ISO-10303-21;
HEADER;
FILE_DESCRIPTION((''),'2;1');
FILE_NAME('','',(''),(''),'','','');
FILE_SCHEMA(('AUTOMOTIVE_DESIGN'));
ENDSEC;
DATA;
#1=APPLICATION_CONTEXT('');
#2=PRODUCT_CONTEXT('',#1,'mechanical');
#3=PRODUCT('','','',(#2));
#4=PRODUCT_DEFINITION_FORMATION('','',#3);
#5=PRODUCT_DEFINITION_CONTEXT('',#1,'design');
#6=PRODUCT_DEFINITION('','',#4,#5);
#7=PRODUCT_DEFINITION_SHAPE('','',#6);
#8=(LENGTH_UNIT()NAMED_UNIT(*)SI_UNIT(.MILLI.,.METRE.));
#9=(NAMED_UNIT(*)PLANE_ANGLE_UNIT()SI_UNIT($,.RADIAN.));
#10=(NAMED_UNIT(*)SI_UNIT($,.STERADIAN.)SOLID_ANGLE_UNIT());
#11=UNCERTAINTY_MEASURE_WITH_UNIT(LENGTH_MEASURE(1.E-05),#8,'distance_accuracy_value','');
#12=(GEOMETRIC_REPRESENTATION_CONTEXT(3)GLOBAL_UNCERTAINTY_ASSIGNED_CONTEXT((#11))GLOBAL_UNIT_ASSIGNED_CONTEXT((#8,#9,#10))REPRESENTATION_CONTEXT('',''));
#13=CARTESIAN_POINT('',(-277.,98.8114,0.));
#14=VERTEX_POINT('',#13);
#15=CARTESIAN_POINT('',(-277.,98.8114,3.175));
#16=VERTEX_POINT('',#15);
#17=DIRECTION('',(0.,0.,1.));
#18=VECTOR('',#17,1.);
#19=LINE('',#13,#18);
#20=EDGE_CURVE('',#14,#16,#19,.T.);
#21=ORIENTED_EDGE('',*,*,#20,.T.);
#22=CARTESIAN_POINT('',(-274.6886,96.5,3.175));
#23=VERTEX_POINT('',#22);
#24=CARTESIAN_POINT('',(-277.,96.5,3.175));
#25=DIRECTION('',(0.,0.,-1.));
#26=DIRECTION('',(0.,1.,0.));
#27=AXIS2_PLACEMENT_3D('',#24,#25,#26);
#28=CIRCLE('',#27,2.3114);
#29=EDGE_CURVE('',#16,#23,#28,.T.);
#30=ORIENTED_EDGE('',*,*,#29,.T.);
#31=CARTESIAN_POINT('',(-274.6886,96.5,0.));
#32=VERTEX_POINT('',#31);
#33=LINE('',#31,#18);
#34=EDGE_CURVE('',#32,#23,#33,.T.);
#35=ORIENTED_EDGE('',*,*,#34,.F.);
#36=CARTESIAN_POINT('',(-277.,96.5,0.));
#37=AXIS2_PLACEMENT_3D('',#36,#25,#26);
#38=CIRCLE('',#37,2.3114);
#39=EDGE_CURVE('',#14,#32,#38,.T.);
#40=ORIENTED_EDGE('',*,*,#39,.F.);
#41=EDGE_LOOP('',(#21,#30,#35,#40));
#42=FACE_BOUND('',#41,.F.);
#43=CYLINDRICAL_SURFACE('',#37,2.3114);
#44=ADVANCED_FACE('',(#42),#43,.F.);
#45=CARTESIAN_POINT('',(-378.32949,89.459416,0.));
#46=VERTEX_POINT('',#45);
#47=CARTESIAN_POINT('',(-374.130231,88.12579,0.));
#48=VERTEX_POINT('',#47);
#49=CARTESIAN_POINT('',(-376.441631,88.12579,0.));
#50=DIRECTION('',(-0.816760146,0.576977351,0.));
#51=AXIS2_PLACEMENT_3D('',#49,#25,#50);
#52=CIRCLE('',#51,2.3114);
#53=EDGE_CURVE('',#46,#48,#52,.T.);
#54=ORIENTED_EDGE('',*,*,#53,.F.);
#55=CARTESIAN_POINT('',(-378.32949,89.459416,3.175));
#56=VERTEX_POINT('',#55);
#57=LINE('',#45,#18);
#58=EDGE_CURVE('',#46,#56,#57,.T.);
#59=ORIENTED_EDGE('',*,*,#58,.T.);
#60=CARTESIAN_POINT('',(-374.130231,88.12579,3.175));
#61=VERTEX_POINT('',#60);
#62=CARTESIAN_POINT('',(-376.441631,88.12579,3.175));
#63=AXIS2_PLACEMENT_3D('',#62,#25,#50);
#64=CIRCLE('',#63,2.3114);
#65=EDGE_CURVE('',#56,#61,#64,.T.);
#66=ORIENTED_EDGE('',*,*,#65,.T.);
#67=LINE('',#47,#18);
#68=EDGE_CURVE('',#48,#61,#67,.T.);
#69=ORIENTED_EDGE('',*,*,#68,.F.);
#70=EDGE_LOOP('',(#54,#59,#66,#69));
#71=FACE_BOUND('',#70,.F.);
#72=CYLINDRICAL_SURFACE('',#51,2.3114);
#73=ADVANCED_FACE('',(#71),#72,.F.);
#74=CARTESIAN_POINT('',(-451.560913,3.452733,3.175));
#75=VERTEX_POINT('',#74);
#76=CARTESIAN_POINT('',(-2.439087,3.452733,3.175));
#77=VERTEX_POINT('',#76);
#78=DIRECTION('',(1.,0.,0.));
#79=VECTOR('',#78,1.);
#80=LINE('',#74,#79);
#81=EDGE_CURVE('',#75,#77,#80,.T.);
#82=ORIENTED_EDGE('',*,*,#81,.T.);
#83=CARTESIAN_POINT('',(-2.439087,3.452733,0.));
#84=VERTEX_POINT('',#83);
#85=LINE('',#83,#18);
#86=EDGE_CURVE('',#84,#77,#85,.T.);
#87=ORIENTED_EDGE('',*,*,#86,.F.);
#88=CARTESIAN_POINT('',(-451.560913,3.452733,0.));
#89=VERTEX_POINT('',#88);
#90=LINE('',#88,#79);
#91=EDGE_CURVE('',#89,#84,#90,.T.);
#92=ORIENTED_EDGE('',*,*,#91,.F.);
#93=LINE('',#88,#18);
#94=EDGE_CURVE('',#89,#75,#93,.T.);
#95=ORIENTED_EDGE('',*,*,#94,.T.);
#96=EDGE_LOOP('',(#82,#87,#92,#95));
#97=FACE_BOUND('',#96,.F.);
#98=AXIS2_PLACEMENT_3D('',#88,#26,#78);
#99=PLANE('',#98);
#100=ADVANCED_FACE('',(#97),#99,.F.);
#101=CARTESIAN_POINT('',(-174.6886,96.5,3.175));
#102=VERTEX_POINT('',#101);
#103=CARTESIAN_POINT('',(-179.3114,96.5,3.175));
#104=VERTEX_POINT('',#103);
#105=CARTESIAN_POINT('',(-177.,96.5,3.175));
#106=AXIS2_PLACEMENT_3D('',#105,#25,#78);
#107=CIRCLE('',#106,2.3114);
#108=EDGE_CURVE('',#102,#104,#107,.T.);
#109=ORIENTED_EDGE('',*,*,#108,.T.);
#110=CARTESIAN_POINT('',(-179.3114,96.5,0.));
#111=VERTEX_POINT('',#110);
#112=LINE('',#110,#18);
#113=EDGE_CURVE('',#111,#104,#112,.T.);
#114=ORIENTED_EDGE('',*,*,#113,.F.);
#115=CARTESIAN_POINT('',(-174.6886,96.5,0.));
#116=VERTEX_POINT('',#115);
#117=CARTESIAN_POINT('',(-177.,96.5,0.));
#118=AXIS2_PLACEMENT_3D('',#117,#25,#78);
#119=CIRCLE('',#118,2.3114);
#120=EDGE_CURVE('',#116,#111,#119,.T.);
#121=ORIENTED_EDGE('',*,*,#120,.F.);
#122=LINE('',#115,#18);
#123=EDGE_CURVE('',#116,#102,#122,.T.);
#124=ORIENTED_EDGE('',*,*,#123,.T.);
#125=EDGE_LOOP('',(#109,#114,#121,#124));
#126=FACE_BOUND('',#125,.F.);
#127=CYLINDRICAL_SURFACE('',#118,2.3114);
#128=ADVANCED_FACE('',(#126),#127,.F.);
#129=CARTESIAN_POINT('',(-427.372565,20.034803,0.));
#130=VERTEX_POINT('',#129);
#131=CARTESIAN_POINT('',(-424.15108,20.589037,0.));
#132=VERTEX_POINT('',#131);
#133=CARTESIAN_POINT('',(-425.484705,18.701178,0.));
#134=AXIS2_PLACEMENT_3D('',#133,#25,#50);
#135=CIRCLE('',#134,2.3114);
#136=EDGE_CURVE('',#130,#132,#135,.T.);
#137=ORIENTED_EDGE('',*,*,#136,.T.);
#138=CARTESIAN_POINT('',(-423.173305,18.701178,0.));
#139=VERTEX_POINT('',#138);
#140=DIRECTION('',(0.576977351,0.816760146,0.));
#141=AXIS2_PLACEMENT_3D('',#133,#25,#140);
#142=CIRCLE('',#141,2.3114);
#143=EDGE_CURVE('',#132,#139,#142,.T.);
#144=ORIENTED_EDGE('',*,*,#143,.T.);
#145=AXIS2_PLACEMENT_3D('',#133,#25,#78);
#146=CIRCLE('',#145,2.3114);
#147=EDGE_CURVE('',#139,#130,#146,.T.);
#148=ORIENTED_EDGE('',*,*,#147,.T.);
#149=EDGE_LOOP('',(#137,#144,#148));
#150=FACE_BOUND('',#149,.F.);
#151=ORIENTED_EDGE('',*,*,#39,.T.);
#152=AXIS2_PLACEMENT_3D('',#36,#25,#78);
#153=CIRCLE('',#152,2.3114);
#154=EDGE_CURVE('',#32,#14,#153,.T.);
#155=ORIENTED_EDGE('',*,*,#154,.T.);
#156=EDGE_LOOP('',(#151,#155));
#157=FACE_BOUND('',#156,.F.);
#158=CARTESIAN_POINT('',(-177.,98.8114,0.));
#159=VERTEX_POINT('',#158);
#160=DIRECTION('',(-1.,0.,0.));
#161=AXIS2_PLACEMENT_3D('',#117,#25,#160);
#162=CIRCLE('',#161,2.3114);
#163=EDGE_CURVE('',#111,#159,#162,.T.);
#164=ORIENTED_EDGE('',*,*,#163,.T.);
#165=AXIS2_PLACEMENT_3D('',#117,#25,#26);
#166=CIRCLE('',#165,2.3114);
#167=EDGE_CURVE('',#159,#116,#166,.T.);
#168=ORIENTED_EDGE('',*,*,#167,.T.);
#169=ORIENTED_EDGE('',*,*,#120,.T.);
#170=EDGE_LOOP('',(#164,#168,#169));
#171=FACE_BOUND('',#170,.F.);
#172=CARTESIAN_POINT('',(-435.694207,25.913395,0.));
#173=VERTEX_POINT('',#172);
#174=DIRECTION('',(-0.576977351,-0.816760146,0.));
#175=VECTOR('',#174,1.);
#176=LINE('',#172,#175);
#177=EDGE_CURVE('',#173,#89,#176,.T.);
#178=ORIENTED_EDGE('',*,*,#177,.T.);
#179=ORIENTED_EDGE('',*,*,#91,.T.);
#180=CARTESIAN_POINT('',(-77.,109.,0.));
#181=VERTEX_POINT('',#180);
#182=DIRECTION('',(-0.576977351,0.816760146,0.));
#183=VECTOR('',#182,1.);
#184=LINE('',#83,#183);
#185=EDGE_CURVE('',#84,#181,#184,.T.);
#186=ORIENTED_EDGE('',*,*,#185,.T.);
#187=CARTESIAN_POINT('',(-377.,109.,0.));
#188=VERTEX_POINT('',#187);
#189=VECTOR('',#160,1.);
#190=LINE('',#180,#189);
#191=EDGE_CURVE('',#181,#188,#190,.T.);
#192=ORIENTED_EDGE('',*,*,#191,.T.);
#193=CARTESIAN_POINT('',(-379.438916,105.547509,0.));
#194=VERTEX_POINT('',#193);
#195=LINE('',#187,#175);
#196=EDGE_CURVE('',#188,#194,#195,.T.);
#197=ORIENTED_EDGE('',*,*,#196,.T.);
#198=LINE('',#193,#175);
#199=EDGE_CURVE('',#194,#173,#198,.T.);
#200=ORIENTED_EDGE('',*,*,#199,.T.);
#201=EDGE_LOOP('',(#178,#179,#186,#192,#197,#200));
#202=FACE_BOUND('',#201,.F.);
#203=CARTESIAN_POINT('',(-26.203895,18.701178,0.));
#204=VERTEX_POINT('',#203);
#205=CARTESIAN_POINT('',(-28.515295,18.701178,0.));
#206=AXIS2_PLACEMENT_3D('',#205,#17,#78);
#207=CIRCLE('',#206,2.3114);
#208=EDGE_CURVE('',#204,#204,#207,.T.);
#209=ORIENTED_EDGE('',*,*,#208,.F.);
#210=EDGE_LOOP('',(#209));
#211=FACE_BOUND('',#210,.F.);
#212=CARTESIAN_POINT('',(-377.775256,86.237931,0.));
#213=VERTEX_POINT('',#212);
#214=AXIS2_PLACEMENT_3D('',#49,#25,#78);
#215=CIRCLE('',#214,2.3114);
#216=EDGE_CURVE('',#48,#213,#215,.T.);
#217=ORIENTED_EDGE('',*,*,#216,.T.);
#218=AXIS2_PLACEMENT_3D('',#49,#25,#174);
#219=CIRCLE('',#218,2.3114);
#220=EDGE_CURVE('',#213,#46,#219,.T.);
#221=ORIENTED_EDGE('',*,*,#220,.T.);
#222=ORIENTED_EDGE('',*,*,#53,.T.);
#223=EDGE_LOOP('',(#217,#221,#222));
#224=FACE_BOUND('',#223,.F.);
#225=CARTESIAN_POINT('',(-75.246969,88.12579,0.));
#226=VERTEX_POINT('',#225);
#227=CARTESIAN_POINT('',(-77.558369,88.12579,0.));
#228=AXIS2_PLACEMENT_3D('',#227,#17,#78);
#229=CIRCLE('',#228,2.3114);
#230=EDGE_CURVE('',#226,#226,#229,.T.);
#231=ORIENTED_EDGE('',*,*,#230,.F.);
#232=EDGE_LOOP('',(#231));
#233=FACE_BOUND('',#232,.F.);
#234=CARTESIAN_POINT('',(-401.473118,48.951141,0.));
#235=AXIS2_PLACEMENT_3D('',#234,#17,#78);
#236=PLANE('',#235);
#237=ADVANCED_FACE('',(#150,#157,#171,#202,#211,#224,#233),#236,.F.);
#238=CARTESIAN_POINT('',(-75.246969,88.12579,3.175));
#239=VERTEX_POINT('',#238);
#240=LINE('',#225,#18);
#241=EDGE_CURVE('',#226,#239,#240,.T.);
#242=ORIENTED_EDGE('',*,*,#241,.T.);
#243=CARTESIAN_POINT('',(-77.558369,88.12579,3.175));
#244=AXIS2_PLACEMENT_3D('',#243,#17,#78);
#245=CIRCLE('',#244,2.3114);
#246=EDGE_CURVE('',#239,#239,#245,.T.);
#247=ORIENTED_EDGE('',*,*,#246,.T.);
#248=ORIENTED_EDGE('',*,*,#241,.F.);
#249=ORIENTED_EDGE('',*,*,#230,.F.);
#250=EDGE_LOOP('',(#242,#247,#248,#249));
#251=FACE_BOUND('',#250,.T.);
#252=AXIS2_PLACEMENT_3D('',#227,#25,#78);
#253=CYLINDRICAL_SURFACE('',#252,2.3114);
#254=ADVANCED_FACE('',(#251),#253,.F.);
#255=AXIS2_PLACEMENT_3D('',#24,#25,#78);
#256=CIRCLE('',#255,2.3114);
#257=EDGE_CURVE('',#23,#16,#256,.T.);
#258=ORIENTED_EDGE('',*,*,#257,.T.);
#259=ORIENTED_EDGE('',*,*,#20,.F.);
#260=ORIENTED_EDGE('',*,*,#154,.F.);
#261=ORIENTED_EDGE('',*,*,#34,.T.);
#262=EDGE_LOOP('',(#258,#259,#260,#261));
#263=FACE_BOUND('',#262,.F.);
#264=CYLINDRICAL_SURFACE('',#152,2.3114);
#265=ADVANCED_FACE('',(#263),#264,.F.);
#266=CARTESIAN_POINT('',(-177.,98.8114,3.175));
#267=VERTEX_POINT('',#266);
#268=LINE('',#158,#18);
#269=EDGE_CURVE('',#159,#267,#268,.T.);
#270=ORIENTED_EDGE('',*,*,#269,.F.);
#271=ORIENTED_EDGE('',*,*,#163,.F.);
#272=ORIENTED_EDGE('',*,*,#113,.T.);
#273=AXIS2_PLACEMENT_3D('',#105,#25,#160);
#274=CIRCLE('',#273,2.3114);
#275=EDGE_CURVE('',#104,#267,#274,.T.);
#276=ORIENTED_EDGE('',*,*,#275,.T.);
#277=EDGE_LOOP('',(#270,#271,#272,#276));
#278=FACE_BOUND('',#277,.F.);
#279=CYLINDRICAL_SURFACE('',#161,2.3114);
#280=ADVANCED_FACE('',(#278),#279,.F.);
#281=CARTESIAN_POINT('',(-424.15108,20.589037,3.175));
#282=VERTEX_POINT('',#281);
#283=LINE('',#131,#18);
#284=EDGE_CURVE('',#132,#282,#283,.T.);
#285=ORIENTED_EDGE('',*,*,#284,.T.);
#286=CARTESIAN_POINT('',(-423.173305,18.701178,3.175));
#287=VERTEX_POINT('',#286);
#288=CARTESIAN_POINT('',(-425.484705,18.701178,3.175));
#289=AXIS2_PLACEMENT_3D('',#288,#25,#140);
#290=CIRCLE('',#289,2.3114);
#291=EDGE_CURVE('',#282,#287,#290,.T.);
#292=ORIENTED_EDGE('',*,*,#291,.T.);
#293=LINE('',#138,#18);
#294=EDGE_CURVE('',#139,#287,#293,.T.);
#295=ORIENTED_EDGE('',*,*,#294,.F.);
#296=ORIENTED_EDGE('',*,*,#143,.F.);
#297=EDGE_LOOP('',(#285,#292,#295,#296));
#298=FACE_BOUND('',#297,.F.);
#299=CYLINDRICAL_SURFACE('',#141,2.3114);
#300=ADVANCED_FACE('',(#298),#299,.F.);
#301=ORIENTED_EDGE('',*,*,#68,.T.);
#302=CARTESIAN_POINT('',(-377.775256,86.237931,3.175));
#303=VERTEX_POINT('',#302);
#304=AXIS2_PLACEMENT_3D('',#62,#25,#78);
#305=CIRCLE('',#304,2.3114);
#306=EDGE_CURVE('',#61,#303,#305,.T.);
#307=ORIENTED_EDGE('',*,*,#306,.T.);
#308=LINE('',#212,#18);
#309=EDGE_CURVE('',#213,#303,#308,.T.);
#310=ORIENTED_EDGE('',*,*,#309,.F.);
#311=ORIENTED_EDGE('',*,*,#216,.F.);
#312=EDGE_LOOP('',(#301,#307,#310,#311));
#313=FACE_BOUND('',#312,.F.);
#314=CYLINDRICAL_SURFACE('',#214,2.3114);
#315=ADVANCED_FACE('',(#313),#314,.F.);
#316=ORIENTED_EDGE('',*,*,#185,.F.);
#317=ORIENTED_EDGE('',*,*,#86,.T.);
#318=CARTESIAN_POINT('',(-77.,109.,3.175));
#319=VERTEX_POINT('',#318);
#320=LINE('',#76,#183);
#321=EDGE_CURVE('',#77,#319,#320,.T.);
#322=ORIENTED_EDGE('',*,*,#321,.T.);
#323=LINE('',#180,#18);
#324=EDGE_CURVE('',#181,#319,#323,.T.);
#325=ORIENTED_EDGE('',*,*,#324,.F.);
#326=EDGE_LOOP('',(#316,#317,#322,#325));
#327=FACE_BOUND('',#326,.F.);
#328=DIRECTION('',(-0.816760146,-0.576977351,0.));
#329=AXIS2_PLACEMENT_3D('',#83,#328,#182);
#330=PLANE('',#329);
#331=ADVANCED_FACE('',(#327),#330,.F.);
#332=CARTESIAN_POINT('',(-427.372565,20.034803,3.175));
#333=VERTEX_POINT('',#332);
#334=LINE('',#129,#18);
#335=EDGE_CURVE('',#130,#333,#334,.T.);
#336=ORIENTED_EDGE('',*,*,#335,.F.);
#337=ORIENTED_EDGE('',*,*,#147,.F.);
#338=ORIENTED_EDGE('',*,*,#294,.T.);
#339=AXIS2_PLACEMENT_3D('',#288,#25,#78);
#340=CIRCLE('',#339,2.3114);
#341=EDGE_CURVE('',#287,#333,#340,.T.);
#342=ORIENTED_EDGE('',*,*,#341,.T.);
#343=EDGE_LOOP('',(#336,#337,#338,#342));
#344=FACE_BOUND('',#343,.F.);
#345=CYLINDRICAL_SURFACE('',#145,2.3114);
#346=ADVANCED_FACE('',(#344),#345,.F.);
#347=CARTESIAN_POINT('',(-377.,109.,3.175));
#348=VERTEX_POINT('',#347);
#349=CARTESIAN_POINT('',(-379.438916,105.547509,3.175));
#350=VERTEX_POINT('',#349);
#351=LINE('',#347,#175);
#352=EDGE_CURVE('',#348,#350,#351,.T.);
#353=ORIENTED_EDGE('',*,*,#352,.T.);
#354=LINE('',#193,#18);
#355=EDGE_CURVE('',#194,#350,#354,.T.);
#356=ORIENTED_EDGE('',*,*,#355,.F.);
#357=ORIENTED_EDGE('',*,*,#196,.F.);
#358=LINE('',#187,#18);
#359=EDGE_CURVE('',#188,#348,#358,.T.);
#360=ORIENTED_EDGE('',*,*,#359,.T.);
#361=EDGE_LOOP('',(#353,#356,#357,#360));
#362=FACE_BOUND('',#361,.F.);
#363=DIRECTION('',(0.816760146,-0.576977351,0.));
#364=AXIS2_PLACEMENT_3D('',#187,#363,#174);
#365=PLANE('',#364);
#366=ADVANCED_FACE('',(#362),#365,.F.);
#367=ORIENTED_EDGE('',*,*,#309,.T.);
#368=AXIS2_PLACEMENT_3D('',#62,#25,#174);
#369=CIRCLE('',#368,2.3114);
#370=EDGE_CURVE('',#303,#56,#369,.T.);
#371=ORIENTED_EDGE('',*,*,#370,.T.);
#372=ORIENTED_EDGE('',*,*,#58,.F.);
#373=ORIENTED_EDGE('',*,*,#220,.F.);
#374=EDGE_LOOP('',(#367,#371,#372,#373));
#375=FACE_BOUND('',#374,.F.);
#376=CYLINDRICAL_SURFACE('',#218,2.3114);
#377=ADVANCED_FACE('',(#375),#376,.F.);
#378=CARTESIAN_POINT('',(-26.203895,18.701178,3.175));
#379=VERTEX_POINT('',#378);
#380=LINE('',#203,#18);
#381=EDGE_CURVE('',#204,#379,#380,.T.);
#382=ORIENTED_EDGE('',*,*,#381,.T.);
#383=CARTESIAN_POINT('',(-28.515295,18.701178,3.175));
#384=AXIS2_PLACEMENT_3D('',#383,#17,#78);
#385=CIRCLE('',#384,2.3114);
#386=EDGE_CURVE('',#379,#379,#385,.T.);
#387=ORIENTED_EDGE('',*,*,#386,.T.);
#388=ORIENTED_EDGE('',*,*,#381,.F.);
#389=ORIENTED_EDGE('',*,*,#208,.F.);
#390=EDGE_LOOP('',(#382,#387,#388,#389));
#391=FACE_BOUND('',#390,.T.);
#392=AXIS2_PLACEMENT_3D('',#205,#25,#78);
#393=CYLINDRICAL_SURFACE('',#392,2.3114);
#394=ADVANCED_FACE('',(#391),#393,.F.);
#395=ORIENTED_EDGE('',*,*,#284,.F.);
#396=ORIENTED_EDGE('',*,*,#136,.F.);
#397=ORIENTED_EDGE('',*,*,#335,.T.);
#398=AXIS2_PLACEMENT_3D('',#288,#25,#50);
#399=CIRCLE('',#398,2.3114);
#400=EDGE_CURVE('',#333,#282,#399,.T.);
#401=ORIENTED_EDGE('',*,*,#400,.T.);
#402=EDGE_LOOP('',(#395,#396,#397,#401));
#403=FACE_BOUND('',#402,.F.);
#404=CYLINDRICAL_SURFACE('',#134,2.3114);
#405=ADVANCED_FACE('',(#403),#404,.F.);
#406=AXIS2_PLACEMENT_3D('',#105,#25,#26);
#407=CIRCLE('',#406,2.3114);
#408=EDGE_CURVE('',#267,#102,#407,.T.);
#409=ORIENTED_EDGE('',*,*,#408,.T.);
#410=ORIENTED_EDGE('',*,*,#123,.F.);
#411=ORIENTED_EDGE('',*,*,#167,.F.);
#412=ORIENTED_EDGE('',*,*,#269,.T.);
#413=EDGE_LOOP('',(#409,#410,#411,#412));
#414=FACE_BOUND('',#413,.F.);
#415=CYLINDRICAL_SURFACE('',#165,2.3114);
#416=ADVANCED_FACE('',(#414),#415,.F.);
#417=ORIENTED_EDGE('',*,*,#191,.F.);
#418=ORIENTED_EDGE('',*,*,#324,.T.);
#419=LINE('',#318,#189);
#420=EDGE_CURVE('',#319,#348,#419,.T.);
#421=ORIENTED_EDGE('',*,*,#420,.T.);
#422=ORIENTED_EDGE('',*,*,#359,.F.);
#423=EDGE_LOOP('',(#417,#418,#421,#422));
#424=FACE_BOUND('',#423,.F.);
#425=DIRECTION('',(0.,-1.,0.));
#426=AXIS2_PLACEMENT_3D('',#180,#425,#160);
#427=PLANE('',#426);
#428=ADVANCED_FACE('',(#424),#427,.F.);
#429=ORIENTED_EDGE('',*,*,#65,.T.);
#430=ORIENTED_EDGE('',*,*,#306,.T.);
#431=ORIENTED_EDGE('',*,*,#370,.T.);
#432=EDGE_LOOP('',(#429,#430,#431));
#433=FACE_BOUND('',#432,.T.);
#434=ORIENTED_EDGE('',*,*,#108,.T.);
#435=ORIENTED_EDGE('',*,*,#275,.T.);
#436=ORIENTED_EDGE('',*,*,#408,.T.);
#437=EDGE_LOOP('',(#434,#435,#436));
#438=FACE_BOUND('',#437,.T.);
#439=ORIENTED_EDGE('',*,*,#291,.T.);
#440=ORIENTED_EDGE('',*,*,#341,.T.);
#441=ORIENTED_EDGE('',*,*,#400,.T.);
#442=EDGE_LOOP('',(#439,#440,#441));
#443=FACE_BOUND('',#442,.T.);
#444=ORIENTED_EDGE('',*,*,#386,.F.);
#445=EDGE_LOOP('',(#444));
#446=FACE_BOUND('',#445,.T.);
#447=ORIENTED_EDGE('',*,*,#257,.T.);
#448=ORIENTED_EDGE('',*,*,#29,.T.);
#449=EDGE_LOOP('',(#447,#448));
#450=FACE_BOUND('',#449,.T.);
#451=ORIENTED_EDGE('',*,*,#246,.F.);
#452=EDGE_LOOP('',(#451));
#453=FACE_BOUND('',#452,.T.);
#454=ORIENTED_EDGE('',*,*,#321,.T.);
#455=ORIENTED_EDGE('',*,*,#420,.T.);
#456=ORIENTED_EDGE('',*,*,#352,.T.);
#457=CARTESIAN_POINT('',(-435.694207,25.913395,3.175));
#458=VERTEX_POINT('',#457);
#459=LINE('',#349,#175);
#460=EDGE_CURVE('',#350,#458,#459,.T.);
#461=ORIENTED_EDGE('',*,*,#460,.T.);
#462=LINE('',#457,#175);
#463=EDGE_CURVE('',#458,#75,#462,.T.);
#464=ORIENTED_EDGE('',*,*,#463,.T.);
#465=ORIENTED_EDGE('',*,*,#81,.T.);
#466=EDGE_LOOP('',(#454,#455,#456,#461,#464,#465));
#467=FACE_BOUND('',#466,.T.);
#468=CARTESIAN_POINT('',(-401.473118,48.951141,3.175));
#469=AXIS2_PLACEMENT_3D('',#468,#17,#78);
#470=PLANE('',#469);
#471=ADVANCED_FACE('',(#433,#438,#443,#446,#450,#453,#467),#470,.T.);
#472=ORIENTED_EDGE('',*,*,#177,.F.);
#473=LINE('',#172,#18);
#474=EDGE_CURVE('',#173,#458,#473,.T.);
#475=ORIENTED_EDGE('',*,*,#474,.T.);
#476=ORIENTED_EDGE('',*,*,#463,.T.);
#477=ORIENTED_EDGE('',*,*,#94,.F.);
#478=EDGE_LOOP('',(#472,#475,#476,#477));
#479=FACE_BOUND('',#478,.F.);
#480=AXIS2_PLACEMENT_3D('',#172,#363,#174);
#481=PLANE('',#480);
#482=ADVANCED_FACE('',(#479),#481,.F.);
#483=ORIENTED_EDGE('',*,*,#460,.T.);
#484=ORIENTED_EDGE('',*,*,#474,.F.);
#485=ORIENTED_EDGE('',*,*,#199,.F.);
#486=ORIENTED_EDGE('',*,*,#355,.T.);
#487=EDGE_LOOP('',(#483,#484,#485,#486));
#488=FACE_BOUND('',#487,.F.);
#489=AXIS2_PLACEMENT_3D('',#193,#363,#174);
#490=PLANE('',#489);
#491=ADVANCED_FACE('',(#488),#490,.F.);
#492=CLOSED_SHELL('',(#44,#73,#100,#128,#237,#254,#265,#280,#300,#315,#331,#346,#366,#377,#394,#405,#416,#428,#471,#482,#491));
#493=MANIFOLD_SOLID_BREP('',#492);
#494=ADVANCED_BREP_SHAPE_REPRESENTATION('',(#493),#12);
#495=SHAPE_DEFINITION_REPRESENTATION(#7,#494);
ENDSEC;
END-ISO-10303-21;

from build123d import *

# Parameters (mm, degrees)
F0_R     = 2.3114
F1_DEPTH = 3.175


with BuildPart() as f1:
    # F0 (on Top) → F1 (new body)
    with BuildSketch(Plane.XY):
        with BuildLine():
            Line((-451.5609132883, 3.4527331373), (-420.9521720122, 3.4527331373))
            Line((-420.9521720122, 3.4527331373), (-359.0199119076, 91.1230753634))
            Line((-359.0199119076, 91.1230753634), (-379.4389155629, 105.5475091382))
            Line((-379.4389155629, 105.5475091382), (-386.6511324503, 95.3380073106))
            Line((-386.6511324503, 95.3380073106), (-378.3294900246, 89.4594158723))
            ThreePointArc((-378.3294900246, 89.4594158723), (-375.7419979554, 90.3287620732), (-374.1302306227, 88.1257904232))
            ThreePointArc((-374.1302306227, 88.1257904232), (-375.3786094336, 86.0733392273), (-377.7752560717, 86.2379310212))
            Line((-377.7752560717, 86.2379310212), (-424.151080008, 20.5890373971))
            ThreePointArc((-424.151080008, 20.5890373971), (-423.4322542612, 19.7641991843), (-423.1733054571, 18.7011779952))
            ThreePointArc((-423.1733054571, 18.7011779952), (-426.1843381244, 16.4982063451), (-427.3725648591, 20.0348034442))
            Line((-427.3725648591, 20.0348034442), (-435.6942072848, 25.9133948826))
            Line((-435.6942072848, 25.9133948826), (-451.5609132883, 3.4527331373))
        make_face()
        Polygon((-359.0199119076, 91.1230753634), (-420.9521720122, 3.4527331373), (-2.4390867117, 3.4527331373), (-77, 109), (-177, 109), (-227, 109), (-277, 109), (-377, 109), (-379.4389155629, 105.5475091382), align=None)
        with Locations((-28.5152945429, 18.7011779952)):
            Circle(F0_R, mode=Mode.SUBTRACT)
        with BuildLine():
            ThreePointArc((-274.6886, 96.5), (-278.634406614, 94.865593386), (-277, 98.8114))
            ThreePointArc((-277, 98.8114), (-275.365593386, 98.134406614), (-274.6886, 96.5))
        make_face(mode=Mode.SUBTRACT)
        with Locations((-77.5583693773, 88.1257904232)):
            Circle(F0_R, mode=Mode.SUBTRACT)
        with BuildLine():
            ThreePointArc((-174.6886, 96.5), (-177, 94.1886), (-179.3114, 96.5))
            ThreePointArc((-179.3114, 96.5), (-178.634406614, 98.134406614), (-177, 98.8114))
            ThreePointArc((-177, 98.8114), (-175.365593386, 98.134406614), (-174.6886, 96.5))
        make_face(mode=Mode.SUBTRACT)
        with BuildLine():
            Line((-415.5, 54.5), (-435.6942072848, 25.9133948826))
            Line((-435.6942072848, 25.9133948826), (-427.3725648591, 20.0348034442))
            ThreePointArc((-427.3725648591, 20.0348034442), (-425.8766080436, 20.9791117788), (-424.151080008, 20.5890373971))
            Line((-424.151080008, 20.5890373971), (-377.7752560717, 86.2379310212))
            ThreePointArc((-377.7752560717, 86.2379310212), (-378.7195644063, 87.7338878367), (-378.3294900246, 89.4594158723))
            Line((-378.3294900246, 89.4594158723), (-386.6511324503, 95.3380073106))
            Line((-386.6511324503, 95.3380073106), (-415.5, 54.5))
        make_face()
    extrude(amount=F1_DEPTH)


solid = f1.part
